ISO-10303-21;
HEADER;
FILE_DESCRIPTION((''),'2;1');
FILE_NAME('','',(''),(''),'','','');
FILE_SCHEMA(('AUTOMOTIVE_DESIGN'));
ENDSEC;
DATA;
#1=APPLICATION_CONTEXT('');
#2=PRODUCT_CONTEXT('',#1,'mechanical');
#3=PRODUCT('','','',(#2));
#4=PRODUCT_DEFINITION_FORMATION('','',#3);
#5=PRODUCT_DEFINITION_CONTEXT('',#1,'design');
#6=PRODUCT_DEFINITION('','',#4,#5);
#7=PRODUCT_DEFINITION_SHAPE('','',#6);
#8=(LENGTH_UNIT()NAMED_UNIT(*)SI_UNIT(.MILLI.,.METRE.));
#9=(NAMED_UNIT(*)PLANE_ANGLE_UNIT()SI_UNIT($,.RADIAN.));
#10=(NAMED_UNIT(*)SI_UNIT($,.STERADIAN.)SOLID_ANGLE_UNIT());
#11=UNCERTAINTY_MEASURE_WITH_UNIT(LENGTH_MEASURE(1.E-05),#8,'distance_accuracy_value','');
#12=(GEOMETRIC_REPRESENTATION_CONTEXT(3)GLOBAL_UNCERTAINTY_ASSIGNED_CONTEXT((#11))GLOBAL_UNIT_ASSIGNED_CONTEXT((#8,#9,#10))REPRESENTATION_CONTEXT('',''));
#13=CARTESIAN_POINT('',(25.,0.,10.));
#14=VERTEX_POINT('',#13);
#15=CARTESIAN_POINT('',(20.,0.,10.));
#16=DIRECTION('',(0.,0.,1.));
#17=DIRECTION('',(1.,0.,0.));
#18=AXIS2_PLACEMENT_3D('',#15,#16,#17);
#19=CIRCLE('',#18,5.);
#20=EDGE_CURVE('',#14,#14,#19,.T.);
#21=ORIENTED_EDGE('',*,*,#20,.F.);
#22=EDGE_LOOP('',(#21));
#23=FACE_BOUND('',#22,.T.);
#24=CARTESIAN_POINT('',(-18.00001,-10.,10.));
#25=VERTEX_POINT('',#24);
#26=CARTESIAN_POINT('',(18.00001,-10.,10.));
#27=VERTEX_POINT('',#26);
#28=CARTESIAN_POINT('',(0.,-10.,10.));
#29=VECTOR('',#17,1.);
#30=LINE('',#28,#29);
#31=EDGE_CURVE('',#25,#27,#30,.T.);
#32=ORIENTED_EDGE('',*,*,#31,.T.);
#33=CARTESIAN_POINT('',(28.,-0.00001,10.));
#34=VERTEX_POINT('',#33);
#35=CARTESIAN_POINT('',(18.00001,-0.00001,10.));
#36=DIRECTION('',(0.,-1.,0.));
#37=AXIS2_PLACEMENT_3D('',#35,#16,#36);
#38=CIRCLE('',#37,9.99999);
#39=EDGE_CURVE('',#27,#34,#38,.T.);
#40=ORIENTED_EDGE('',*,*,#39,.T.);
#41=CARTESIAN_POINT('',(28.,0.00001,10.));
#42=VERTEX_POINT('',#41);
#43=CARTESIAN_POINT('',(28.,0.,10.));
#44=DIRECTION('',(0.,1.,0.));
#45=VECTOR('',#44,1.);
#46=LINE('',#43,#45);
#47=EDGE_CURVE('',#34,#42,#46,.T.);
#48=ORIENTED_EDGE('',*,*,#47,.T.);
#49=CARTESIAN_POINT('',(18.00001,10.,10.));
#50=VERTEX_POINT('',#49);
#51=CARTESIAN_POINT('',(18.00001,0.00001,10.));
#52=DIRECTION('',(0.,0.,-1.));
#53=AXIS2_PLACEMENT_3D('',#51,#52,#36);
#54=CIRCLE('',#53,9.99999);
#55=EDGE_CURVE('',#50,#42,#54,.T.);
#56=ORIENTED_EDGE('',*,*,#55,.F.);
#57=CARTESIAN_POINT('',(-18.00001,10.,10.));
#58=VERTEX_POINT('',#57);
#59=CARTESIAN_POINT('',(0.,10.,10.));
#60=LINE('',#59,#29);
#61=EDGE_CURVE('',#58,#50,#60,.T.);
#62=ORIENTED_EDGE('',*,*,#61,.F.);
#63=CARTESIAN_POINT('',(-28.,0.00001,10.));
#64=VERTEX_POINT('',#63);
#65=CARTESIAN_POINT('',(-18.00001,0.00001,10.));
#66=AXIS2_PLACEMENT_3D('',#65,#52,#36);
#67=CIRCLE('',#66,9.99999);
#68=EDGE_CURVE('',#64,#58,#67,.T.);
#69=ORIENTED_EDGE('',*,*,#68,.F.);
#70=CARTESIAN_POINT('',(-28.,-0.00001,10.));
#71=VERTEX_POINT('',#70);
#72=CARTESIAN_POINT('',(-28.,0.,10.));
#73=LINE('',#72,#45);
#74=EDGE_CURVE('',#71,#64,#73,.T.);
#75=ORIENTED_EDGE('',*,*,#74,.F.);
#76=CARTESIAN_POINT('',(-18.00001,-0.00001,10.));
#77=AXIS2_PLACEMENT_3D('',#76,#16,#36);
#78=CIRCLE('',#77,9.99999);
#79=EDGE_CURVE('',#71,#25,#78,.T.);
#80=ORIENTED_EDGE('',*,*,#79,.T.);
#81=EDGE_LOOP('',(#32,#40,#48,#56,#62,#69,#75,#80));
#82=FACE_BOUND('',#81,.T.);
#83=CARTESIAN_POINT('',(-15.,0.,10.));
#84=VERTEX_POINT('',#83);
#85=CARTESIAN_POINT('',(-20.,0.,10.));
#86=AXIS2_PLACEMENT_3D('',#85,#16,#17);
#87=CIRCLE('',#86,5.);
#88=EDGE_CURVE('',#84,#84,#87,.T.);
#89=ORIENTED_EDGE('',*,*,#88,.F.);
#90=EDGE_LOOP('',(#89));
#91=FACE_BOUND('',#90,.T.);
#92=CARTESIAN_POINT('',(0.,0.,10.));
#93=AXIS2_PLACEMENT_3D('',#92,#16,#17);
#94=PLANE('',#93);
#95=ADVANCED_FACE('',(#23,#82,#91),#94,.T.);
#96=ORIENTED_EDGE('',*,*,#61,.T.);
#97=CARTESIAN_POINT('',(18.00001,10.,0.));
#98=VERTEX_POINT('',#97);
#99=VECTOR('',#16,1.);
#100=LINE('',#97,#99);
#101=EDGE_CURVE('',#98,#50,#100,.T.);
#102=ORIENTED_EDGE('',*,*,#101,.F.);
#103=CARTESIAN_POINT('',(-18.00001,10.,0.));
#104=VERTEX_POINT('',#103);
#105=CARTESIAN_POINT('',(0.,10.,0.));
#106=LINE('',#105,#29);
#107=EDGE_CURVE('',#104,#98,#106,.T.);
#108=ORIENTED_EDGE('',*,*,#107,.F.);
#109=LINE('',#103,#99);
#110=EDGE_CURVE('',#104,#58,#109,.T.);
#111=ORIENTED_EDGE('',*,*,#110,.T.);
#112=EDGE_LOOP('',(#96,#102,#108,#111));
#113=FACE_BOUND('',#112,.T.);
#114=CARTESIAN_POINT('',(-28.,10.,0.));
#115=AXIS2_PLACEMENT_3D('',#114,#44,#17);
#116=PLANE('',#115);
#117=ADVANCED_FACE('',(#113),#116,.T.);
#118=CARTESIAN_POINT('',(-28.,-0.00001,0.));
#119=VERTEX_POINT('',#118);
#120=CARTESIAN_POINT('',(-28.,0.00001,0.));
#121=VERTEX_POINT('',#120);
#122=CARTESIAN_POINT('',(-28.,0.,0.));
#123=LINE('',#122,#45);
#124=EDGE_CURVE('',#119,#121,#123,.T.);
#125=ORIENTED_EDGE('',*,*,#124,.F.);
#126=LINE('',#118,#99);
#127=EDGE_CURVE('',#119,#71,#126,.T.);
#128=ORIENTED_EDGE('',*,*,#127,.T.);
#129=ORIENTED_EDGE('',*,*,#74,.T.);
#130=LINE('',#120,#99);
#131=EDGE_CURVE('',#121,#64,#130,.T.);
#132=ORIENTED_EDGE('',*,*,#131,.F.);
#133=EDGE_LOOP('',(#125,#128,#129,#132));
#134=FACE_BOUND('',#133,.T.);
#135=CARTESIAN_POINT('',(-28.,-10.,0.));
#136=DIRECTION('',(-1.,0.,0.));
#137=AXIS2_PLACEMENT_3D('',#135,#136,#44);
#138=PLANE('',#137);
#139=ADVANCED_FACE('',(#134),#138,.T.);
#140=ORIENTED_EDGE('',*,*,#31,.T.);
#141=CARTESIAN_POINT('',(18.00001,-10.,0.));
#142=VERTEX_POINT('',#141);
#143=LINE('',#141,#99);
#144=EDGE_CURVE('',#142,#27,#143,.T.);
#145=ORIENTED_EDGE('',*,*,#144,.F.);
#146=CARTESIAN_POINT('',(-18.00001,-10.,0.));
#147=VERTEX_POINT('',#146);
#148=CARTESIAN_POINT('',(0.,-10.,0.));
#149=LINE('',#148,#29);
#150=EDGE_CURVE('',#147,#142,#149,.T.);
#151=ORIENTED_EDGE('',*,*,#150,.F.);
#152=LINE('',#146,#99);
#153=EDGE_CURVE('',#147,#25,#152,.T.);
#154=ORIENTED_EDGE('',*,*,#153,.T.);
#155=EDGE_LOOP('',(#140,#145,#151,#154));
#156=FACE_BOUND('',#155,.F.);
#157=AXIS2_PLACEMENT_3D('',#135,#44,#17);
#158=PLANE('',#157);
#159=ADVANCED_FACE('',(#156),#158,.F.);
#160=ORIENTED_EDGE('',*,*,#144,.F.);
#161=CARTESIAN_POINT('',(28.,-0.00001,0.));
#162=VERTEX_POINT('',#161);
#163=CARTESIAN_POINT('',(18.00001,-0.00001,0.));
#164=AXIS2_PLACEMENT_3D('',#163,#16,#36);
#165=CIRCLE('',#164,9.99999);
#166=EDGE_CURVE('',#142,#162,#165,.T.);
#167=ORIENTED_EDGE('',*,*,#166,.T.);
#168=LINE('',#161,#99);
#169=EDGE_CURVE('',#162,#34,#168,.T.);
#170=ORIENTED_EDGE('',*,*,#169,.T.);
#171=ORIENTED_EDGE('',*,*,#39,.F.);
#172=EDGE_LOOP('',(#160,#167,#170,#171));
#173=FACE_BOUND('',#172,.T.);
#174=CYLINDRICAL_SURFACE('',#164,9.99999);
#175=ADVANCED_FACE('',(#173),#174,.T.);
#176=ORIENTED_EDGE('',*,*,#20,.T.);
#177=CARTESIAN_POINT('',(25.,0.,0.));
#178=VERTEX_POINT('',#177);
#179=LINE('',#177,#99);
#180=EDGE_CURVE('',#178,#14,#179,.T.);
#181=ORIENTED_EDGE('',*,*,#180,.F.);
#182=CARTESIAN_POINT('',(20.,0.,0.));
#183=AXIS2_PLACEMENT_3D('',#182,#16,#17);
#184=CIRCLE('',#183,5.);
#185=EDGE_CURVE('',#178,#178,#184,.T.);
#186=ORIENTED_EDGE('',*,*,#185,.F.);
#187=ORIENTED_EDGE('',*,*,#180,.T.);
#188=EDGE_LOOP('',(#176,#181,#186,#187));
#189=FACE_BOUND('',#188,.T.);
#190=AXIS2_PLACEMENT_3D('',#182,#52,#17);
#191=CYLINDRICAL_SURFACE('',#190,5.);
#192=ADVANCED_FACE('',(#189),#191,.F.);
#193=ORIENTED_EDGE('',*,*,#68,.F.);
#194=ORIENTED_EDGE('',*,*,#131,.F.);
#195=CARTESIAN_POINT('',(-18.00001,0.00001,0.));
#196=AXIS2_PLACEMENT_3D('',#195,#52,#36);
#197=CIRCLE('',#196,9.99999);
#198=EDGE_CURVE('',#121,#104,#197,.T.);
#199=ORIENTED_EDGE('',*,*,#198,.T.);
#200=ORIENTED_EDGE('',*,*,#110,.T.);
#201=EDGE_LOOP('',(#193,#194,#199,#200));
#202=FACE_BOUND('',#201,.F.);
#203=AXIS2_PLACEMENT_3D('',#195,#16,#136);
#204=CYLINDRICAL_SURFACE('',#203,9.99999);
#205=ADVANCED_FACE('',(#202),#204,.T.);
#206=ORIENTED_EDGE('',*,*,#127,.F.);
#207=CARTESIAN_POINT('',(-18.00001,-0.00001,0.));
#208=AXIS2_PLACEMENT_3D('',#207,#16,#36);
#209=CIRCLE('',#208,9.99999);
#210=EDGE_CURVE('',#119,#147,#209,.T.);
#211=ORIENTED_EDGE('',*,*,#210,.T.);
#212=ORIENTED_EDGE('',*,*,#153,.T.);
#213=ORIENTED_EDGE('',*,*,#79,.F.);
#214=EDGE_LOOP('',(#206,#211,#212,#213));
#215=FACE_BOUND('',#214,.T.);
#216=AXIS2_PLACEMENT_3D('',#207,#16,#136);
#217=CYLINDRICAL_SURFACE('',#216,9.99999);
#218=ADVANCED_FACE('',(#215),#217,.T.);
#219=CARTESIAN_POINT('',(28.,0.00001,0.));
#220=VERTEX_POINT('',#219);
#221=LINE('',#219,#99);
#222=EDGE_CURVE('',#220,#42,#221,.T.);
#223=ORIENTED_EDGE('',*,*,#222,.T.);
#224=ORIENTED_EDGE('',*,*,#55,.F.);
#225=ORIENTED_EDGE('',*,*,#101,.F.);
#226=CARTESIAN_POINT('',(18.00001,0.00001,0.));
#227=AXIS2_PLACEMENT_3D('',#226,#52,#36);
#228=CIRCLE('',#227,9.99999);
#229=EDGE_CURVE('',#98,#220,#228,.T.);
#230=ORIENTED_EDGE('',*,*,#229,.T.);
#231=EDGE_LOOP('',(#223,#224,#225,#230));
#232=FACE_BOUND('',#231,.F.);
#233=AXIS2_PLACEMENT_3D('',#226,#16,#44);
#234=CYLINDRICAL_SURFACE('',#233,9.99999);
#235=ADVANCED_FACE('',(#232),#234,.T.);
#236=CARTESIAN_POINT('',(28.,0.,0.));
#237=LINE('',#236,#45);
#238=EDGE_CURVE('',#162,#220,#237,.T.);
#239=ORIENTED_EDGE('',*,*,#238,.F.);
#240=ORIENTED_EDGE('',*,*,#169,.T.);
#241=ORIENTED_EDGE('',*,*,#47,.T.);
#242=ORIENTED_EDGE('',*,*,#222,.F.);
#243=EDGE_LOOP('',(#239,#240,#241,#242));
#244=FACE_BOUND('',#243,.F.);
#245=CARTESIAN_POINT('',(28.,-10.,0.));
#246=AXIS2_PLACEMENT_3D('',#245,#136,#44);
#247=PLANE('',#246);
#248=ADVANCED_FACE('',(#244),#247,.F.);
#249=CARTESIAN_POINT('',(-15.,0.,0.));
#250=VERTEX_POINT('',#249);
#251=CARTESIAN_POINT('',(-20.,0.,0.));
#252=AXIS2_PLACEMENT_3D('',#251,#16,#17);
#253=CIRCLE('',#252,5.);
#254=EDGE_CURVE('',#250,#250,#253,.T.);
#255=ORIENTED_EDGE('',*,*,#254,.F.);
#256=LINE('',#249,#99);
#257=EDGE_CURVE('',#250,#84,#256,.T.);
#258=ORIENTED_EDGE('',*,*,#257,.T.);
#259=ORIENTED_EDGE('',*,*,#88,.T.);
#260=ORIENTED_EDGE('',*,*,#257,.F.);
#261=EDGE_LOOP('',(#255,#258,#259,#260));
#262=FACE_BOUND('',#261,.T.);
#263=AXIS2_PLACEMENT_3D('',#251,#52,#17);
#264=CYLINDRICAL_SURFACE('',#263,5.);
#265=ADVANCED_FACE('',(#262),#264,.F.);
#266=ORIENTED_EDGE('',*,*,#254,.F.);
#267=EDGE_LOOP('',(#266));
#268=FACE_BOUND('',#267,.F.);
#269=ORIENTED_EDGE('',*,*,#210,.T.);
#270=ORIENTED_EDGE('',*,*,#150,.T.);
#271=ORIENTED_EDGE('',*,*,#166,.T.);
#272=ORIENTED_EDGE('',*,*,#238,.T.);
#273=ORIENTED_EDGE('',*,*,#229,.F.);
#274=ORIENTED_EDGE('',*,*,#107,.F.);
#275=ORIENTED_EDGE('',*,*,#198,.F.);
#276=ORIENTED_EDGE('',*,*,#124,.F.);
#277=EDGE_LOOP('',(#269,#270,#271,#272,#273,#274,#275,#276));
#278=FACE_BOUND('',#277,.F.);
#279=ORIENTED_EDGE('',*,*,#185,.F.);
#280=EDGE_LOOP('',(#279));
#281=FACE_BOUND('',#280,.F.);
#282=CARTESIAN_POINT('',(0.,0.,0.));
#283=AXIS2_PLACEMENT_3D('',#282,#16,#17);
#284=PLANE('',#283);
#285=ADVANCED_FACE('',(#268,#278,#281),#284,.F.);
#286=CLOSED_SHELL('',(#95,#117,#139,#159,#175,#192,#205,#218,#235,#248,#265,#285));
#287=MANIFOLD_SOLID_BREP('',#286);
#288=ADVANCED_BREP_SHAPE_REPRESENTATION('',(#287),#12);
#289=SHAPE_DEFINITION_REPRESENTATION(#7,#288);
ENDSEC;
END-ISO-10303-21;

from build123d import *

# Parameters (mm, degrees)
F0_W     = 56
F0_H     = 20
F0_R     = 5
F1_DEPTH = 10
F2_R     = 9.99999


# Not quite as in the source:
# - a fillet or chamfer is up to 0.001 mm smaller than in the source, because OpenCascade refuses the exact size


with BuildPart() as f1:
    # F0 (on Top) → F1 (new body)
    with BuildSketch(Plane.XY):
        Rectangle(F0_W, F0_H)
        with Locations((-20, 0)):
            Circle(F0_R, mode=Mode.SUBTRACT)
        with Locations((20, 0)):
            Circle(F0_R, mode=Mode.SUBTRACT)
    extrude(amount=F1_DEPTH)

    # F2 (radius 10 in the source; OpenCascade refuses exactly that, so slightly less here)
    f2_edges = [f1.edges().sort_by_distance(p)[0] for p in [
        (-28, 10, 5),
        (-28, -10, 5),
        (28, 10, 5),
        (28, -10, 5),
    ]]
    fillet(f2_edges, radius=F2_R)


solid = f1.part
